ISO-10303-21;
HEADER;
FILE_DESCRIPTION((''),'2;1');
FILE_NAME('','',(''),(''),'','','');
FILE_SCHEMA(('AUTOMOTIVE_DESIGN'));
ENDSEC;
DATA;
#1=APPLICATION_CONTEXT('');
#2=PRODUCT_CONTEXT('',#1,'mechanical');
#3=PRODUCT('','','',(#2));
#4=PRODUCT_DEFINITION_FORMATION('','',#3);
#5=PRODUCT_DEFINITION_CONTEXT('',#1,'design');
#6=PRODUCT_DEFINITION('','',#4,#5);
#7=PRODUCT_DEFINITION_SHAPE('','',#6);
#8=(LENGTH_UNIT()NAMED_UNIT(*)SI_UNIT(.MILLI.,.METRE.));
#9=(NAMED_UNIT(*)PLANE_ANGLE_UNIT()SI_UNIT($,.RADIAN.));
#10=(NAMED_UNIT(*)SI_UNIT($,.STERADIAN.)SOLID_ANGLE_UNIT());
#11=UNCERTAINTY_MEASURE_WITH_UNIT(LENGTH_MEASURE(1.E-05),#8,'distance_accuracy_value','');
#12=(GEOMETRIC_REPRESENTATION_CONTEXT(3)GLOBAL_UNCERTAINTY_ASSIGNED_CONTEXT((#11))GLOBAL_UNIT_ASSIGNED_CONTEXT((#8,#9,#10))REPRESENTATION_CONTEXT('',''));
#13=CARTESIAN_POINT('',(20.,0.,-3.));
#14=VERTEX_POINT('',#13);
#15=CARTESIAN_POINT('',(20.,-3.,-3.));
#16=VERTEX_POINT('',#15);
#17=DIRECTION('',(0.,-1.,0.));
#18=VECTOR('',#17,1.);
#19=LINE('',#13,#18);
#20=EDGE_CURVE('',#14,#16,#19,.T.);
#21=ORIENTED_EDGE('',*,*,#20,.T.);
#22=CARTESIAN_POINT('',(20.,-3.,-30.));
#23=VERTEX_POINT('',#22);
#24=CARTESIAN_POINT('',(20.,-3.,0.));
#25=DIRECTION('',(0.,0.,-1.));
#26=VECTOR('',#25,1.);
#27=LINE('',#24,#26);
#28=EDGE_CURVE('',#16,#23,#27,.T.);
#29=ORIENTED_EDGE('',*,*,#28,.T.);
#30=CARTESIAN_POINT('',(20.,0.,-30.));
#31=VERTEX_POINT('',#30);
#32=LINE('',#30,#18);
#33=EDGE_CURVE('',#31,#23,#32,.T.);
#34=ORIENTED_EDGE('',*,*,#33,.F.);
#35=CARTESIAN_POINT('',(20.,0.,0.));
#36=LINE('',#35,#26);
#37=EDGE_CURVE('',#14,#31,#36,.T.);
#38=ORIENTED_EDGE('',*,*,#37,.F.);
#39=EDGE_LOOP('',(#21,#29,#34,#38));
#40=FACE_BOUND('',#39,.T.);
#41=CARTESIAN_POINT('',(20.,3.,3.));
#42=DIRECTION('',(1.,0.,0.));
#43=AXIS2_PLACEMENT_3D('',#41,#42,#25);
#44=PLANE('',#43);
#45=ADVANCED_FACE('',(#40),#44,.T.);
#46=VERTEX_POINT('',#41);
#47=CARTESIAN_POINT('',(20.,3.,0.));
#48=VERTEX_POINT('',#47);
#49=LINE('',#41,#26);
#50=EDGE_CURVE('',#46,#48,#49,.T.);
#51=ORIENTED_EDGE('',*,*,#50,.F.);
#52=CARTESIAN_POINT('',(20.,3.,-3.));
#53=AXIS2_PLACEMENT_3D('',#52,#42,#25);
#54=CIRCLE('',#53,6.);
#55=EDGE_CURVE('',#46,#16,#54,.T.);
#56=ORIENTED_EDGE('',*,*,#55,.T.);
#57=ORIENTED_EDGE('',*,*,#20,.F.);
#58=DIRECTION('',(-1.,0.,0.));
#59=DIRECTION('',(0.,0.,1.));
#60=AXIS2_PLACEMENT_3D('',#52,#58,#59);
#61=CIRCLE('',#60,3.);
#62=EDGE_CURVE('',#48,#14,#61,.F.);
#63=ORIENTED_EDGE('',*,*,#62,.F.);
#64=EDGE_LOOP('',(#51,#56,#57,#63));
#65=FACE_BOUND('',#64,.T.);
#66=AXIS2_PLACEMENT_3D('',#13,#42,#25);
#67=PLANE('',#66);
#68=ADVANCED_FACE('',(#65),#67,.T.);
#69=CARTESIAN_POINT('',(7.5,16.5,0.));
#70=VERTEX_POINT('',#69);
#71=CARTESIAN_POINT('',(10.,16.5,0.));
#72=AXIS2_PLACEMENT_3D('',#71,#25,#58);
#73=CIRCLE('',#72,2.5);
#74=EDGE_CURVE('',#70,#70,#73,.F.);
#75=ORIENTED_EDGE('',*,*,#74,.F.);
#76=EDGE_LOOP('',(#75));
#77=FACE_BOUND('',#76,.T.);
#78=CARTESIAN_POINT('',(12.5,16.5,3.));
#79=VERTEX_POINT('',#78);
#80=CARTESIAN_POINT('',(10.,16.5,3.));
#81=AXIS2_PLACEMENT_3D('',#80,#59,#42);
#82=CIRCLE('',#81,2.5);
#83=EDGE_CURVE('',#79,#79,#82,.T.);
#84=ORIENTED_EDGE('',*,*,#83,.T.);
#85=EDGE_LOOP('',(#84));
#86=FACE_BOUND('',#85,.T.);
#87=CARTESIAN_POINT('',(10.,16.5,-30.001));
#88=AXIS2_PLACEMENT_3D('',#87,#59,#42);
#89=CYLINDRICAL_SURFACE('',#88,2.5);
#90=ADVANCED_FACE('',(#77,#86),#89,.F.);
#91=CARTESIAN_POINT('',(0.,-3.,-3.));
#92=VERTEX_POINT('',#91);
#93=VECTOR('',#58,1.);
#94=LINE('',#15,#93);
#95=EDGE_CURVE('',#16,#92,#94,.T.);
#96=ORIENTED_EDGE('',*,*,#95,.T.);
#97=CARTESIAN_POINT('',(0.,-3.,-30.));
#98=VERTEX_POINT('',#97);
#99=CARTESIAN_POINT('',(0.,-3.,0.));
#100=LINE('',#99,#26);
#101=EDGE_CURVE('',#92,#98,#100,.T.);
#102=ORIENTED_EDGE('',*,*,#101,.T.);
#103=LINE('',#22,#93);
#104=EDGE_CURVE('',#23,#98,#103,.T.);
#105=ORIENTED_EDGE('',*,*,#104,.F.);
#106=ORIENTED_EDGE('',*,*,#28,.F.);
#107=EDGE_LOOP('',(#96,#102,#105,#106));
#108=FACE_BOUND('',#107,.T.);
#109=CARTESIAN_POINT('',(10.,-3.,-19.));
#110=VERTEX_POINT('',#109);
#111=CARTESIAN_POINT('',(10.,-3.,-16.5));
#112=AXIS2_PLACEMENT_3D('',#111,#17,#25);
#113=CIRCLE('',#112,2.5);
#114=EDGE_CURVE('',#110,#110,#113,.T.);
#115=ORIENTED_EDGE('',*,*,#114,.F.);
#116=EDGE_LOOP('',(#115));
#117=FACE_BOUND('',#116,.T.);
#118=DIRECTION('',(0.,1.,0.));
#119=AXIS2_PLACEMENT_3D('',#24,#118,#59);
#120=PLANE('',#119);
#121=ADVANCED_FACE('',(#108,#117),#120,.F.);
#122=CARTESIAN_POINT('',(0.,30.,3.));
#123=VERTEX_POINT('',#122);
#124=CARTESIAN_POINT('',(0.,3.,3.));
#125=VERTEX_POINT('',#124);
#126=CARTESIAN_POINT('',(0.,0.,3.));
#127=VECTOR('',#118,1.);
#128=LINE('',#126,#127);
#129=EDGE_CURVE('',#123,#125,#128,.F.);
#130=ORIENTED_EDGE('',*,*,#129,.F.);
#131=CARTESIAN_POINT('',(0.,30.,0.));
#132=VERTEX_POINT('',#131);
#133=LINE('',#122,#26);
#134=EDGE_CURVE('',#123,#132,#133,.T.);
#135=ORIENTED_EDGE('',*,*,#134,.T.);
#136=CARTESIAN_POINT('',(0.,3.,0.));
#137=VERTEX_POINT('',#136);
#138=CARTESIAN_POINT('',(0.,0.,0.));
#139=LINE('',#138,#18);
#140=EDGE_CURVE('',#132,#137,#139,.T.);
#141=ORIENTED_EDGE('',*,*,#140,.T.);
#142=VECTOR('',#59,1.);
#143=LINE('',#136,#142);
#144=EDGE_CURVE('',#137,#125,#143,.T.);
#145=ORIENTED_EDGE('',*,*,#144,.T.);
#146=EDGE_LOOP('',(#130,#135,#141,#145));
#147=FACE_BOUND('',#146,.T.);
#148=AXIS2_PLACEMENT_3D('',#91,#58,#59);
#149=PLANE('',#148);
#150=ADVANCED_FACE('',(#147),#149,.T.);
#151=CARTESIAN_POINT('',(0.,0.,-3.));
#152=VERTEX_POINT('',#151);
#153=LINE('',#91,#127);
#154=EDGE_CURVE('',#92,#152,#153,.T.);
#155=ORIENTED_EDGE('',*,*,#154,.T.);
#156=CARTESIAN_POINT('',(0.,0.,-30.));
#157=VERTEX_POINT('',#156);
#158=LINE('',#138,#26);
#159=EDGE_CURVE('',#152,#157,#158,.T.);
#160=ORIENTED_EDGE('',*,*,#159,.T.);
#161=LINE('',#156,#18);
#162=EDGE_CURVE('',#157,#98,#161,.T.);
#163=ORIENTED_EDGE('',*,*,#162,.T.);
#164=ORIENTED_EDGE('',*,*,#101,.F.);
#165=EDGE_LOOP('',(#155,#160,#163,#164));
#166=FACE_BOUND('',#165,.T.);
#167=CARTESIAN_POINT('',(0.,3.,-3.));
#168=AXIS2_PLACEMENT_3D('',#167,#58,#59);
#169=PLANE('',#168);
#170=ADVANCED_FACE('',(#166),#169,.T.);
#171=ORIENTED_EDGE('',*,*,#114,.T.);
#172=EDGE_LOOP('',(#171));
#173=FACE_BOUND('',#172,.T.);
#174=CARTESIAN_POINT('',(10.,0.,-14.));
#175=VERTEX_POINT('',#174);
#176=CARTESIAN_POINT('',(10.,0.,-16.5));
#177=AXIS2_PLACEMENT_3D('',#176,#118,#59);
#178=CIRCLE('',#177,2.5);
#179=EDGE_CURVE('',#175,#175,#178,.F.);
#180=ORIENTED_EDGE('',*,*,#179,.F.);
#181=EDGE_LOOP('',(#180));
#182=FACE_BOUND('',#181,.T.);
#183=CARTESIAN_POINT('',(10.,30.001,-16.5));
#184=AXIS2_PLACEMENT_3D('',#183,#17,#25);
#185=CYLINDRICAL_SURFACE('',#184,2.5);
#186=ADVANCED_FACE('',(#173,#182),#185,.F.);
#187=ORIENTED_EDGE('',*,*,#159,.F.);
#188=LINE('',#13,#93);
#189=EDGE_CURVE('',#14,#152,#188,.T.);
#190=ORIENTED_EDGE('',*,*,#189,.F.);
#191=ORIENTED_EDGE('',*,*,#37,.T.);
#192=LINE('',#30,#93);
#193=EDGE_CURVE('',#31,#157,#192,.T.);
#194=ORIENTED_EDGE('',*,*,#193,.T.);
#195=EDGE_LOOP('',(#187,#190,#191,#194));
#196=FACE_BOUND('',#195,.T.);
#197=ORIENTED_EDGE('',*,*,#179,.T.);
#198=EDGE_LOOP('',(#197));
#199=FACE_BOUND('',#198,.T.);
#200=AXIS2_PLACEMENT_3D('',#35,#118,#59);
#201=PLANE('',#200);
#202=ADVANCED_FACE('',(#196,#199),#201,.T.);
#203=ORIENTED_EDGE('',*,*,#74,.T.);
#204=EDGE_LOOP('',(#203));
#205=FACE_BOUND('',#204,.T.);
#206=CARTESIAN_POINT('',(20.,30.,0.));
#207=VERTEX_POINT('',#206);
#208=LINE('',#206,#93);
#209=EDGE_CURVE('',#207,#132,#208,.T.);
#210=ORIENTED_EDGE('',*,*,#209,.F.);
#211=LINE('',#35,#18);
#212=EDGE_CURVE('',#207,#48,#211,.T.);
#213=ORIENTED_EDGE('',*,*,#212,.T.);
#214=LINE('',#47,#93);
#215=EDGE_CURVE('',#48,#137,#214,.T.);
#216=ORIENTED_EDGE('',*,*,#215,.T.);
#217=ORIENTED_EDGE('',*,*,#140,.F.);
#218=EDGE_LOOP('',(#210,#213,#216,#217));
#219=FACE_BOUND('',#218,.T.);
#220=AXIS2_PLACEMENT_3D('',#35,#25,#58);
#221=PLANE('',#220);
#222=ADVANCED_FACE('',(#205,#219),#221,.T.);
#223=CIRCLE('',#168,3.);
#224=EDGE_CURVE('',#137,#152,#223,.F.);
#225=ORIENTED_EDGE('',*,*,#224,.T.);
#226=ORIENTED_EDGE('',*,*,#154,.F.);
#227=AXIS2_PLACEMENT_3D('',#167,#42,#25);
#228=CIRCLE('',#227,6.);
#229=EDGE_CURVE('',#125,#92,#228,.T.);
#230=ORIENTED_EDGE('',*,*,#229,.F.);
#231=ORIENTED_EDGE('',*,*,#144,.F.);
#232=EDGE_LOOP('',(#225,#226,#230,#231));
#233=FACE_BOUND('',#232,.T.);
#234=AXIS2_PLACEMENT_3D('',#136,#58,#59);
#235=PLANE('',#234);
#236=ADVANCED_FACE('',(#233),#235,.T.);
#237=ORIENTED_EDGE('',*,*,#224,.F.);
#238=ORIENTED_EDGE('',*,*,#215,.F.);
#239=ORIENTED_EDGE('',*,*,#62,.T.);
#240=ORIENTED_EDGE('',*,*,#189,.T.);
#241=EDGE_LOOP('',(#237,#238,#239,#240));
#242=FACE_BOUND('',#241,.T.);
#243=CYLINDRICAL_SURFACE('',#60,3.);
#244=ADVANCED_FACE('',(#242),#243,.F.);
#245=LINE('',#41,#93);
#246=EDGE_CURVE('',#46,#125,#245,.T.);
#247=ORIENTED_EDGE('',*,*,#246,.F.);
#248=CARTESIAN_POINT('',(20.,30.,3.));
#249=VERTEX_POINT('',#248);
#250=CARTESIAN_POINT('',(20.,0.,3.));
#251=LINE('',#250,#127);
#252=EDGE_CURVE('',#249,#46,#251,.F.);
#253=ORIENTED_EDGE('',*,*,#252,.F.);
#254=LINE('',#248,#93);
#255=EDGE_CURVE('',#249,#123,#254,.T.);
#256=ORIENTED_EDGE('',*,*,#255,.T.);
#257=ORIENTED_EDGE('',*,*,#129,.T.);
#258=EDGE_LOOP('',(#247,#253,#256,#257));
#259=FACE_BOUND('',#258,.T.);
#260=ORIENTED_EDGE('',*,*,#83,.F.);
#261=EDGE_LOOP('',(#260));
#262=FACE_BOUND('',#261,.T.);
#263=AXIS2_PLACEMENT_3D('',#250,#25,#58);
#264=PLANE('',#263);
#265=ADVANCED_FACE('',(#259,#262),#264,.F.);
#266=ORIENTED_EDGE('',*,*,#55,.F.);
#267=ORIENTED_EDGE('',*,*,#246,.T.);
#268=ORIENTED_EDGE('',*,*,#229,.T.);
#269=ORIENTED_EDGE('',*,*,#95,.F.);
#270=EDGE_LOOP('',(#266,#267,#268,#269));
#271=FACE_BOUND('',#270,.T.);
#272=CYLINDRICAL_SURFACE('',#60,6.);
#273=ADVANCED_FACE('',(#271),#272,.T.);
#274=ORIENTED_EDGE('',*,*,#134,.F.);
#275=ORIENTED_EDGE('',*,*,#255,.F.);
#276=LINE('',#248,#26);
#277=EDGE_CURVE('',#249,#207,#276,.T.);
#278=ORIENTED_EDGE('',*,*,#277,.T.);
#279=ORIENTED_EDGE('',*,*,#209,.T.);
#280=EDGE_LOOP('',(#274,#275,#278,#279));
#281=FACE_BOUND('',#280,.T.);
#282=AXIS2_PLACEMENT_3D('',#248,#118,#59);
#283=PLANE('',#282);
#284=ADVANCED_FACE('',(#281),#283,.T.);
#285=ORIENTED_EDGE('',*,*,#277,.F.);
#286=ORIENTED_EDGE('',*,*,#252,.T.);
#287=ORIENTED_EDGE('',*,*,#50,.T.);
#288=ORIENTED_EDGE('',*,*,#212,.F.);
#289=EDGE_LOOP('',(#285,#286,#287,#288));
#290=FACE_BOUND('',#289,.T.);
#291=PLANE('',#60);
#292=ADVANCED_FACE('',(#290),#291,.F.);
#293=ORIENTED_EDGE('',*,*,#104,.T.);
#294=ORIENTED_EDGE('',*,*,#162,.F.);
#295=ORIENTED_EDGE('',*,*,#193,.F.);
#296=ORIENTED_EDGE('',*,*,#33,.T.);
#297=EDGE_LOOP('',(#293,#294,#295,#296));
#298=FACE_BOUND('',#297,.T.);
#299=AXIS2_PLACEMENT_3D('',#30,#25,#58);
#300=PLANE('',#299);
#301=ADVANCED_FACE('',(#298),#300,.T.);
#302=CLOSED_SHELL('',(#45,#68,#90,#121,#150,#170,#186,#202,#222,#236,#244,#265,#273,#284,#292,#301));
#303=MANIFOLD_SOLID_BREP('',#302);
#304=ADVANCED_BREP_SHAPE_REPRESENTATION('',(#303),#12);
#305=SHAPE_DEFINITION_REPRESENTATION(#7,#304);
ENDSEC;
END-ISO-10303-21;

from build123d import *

# Parameters (mm, degrees)
BASE_FLANGE1_DEPTH = 20
CUT_EXTRUDE1_REACH = 50.877
SKETCH6_R          = 2.5
CUT_EXTRUDE2_REACH = 50.877
SKETCH7_R          = 2.5


# Sheet-metal steps are written as plain solids
with BuildPart() as part:
    # Sketch1 → Base-Flange1 (new body)
    with BuildSketch(Plane(origin=(0, 0, 0), x_dir=(0, 0, -1), z_dir=(1, 0, 0))):
        with BuildLine():
            Line((30, 0), (3, 0))
            ThreePointArc((3, 0), (0.878679656, 0.878679656), (0, 3))
            Line((0, 3), (0, 30))
            Line((0, 30), (-3, 30))
            Line((-3, 30), (-3, 3))
            ThreePointArc((-3, 3), (-1.242640687, -1.242640687), (3, -3))
            Line((3, -3), (30, -3))
            Line((30, -3), (30, 0))
        make_face()
    extrude(amount=BASE_FLANGE1_DEPTH)

    # Sketch6 → Cut-Extrude1 (cut, up to next)
    with BuildSketch(Plane.XZ.offset(3), mode=Mode.PRIVATE) as cut_extrude1_sk1:
        with Locations(Location((10, -16.5, 0), (0, 0, 270))):
            Circle(SKETCH6_R)
    cut_extrude1_tool1 = extrude(cut_extrude1_sk1.sketch, amount=-CUT_EXTRUDE1_REACH, mode=Mode.PRIVATE) & part.part
    add(cut_extrude1_tool1.solids().sort_by_distance((10, -3, -16.5))[0], mode=Mode.SUBTRACT)

    # Sketch7 → Cut-Extrude2 (cut, up to next)
    with BuildSketch(Plane.XY.offset(3), mode=Mode.PRIVATE) as cut_extrude2_sk1:
        with Locations((10, 16.5)):
            Circle(SKETCH7_R)
    cut_extrude2_tool1 = extrude(cut_extrude2_sk1.sketch, amount=-CUT_EXTRUDE2_REACH, mode=Mode.PRIVATE) & part.part
    add(cut_extrude2_tool1.solids().sort_by_distance((10, 16.5, 3))[0], mode=Mode.SUBTRACT)


solid = part.part
